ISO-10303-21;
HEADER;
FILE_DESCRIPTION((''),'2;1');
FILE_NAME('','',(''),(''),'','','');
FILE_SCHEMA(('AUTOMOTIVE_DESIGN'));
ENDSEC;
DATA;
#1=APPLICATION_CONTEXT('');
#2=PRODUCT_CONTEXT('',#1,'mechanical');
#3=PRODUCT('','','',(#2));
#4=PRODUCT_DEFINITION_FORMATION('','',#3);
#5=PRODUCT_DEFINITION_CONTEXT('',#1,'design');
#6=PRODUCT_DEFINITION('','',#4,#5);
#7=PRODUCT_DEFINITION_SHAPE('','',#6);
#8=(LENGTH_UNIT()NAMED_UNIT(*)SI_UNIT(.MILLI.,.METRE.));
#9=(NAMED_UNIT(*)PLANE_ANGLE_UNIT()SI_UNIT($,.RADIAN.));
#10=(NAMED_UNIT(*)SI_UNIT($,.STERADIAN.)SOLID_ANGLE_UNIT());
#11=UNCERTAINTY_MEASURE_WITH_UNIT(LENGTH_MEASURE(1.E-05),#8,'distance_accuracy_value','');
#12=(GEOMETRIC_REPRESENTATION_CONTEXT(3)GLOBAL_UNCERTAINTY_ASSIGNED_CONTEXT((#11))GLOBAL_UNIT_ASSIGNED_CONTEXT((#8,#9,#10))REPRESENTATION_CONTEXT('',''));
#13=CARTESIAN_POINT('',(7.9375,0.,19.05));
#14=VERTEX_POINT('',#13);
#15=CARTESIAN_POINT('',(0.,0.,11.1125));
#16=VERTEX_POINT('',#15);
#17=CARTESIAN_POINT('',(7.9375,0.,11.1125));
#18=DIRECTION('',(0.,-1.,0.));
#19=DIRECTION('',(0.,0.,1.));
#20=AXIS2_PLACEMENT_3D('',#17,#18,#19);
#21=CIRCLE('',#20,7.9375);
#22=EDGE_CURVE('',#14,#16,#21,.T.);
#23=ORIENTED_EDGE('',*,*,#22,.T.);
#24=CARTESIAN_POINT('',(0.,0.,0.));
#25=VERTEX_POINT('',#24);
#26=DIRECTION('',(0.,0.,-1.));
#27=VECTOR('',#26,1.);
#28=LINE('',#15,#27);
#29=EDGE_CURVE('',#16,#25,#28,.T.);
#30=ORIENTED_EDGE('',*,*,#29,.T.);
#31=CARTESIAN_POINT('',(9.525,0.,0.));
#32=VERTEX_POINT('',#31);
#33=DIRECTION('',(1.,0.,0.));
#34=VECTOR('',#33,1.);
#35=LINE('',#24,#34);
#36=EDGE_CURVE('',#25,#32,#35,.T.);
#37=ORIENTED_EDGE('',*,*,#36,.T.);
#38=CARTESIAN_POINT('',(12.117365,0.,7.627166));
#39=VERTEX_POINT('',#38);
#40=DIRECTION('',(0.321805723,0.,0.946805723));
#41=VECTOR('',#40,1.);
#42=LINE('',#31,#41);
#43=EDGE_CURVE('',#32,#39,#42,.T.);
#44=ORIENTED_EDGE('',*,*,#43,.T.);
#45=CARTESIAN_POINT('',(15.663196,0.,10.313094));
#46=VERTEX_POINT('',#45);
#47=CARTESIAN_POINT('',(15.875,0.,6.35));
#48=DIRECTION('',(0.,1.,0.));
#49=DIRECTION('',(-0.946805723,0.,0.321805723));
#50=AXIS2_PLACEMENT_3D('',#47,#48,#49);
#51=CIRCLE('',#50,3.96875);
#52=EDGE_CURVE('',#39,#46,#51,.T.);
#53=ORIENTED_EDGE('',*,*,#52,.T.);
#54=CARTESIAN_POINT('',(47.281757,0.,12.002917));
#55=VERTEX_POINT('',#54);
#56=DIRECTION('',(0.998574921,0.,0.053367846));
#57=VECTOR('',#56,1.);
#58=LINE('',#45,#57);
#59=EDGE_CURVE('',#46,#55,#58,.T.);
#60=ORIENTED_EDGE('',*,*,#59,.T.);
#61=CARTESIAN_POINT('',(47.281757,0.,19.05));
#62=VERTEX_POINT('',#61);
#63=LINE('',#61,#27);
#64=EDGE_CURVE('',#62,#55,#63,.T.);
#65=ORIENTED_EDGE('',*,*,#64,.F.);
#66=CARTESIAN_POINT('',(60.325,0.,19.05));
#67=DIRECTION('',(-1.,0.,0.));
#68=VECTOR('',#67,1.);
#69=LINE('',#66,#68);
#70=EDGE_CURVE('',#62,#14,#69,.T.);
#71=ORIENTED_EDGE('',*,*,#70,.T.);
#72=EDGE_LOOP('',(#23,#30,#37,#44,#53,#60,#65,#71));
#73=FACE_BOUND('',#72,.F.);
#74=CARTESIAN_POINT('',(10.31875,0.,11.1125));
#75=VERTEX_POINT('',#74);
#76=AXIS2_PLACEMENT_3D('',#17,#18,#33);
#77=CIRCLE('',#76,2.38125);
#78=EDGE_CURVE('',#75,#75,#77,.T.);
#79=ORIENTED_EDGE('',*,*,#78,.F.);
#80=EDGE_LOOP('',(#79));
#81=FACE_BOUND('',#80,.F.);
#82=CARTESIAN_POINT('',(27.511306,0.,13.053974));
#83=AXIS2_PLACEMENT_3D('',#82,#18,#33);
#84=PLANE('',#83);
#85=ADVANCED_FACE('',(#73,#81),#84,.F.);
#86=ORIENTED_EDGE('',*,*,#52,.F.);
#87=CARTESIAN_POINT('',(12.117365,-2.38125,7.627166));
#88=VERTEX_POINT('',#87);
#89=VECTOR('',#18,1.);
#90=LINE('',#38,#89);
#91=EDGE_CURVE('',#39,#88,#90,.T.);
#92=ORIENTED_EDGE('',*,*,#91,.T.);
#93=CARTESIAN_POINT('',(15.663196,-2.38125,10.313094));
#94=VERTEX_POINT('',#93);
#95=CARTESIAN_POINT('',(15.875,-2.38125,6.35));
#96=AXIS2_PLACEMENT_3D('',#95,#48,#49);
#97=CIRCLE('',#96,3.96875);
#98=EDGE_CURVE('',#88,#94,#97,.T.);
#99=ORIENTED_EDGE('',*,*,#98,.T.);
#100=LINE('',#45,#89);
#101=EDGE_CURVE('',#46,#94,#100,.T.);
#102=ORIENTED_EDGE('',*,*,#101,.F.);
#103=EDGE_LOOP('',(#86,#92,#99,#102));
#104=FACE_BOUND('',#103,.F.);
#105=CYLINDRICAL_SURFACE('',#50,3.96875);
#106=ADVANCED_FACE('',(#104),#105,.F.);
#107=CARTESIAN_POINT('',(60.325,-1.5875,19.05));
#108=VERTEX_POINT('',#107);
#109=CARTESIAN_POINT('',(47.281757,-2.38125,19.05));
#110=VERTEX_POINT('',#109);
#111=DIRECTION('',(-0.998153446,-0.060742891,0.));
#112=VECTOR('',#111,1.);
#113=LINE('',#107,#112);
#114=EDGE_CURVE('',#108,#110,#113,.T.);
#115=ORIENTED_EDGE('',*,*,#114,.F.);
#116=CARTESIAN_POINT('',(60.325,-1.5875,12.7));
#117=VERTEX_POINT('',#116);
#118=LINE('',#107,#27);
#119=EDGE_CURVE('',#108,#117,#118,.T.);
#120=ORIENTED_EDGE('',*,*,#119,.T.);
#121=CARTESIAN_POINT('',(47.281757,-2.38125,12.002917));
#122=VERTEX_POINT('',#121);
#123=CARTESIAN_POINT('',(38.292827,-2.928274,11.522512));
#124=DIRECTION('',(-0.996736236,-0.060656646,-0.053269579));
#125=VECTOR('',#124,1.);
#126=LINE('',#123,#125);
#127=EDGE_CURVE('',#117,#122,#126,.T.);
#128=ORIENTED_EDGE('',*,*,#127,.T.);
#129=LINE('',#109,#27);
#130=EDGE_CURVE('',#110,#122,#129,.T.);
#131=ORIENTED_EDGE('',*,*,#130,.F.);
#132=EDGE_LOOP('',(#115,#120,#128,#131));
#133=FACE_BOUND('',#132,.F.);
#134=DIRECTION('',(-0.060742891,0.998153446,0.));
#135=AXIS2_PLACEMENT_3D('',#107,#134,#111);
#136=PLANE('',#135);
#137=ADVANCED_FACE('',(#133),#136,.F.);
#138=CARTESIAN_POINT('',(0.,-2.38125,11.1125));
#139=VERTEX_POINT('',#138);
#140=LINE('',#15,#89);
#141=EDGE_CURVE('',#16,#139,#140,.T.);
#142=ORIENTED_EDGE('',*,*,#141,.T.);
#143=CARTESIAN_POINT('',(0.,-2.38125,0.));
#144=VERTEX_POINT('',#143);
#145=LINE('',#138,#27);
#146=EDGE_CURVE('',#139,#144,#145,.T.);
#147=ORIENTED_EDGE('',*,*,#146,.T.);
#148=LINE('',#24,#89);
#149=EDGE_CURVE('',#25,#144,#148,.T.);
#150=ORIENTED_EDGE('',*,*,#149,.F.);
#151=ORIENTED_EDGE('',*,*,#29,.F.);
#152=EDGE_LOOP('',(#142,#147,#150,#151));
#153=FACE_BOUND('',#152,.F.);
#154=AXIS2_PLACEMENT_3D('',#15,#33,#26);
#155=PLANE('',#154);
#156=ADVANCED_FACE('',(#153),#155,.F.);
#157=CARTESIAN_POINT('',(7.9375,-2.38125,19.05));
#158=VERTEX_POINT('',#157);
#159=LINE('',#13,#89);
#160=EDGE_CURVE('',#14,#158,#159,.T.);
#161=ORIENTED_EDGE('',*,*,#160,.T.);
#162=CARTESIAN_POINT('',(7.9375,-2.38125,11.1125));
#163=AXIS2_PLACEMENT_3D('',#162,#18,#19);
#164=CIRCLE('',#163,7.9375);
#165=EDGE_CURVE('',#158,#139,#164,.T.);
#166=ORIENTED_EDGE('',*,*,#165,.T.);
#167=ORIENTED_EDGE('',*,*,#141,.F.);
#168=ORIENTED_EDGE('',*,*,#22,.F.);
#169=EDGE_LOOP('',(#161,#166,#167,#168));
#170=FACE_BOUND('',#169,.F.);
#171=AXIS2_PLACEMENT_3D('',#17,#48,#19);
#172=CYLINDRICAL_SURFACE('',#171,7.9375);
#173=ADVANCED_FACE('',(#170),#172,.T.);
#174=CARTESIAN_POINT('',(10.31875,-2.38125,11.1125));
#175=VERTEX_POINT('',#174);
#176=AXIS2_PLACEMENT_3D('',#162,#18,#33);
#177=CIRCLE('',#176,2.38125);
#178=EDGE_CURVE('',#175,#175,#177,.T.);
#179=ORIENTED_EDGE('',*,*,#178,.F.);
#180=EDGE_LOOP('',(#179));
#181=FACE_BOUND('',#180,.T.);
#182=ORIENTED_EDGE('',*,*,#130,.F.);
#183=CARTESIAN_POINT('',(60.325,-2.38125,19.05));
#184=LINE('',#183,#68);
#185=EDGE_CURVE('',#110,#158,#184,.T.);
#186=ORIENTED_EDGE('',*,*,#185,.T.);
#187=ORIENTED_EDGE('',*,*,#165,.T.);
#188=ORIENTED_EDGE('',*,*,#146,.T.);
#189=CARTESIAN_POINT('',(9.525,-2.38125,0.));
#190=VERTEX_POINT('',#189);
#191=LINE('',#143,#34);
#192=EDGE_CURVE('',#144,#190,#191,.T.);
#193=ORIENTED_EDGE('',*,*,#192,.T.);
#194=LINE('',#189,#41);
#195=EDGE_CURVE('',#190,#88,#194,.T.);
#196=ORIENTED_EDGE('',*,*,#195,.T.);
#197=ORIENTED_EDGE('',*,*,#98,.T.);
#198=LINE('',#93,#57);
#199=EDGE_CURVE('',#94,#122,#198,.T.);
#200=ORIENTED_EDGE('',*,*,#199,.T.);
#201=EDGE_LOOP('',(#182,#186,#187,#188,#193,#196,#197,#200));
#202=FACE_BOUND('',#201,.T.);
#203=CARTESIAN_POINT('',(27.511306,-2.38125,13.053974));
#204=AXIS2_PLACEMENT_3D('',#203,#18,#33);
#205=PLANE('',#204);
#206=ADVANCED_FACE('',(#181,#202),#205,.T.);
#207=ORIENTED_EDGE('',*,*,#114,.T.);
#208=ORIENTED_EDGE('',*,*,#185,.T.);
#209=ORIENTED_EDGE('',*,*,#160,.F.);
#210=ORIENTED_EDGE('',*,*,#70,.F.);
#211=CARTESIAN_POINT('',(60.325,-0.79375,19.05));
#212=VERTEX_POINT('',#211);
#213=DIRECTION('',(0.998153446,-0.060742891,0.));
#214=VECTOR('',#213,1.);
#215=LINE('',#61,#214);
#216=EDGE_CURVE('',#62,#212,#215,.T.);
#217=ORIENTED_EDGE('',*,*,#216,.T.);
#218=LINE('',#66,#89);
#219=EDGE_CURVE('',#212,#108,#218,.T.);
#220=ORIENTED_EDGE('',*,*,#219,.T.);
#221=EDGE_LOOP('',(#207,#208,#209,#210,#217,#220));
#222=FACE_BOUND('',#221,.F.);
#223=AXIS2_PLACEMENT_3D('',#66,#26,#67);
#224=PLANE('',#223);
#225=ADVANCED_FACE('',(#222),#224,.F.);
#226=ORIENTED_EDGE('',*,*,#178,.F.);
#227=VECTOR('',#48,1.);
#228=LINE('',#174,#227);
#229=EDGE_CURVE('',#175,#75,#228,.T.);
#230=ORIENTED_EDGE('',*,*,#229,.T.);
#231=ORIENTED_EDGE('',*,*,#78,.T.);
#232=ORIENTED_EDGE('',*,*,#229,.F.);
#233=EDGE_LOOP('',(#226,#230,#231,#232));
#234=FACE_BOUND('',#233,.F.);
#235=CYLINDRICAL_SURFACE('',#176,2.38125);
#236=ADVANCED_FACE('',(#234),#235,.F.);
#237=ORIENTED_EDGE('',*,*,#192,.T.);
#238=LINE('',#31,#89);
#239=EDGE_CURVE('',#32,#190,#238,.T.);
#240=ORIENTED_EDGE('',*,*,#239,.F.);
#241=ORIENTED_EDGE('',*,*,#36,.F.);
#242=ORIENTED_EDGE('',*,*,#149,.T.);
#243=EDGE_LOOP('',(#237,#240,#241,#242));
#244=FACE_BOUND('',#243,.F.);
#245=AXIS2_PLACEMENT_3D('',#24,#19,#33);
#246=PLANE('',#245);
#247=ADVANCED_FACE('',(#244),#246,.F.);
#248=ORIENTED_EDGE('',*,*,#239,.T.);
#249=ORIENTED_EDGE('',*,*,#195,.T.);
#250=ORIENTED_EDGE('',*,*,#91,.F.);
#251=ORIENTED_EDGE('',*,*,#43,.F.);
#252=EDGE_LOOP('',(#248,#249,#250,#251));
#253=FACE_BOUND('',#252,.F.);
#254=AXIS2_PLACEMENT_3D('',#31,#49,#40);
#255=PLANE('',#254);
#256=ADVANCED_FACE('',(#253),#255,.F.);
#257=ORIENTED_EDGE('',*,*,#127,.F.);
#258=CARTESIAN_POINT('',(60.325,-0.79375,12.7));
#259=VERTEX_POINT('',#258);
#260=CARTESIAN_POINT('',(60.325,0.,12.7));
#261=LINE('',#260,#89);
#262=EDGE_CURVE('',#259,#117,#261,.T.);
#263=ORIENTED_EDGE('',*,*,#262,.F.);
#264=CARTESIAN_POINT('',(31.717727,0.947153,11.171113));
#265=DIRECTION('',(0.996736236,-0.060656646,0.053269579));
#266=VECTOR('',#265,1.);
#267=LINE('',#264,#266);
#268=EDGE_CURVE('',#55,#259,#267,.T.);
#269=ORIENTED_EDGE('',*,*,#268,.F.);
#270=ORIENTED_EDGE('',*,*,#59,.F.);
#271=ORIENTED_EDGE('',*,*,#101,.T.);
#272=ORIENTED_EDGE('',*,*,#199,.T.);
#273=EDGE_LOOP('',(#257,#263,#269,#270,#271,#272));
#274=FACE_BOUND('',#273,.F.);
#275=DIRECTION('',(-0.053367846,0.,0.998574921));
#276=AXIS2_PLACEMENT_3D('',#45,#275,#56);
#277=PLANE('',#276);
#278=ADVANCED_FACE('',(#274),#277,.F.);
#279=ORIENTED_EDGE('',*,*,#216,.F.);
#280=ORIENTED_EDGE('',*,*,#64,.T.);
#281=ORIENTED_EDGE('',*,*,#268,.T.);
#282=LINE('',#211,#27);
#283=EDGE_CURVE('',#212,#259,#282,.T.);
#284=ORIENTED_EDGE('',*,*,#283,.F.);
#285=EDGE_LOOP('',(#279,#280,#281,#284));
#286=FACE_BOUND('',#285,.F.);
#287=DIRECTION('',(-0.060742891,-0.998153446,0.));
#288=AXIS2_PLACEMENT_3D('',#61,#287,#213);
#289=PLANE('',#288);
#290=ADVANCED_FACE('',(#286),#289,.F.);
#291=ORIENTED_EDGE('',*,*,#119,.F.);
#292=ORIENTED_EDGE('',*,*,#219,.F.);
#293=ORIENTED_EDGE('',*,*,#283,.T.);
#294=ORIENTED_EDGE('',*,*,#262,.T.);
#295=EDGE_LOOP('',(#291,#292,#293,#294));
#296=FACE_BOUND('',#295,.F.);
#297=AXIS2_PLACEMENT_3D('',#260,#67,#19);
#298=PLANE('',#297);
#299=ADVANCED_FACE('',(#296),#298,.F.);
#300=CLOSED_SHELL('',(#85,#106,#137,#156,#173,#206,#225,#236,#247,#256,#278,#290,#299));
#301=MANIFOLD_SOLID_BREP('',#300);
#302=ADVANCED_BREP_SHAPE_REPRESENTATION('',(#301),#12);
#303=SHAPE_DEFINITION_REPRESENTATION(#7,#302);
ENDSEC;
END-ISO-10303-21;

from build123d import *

# Parameters (mm, degrees)
F1_DEPTH = 2.38125
F2_R     = 2.38125
F3_DEPTH = 2.38225
F5_DEPTH = 25.4


# Not quite as in the source:
# - a length typed as a fraction of an inch, garbled in the dataset ("3 / 203.2 mm" for 3/8 in), is restored


with BuildPart() as f1:
    # F0 (on Front) → F1 (new body)
    with BuildSketch(Plane.XZ):
        with BuildLine():
            Line((60.325, 19.05), (7.9375, 19.05))
            ThreePointArc((7.9375, 19.05), (2.3248399243, 16.7251600757), (0, 11.1125))
            Line((0, 11.1125), (0, 0))
            Line((0, 0), (9.525, 0))
            Line((9.525, 0), (12.1173647876, 7.6271664624))
            ThreePointArc((12.1173647876, 7.6271664624), (13.4786145605, 9.5135918491), (15.6631963617, 10.3130942181))
            Line((15.6631963617, 10.3130942181), (60.325, 12.7))
            Line((60.325, 12.7), (60.325, 19.05))
        make_face()
    extrude(amount=F1_DEPTH)

    # F2 (on face) → F3 (cut, through all)
    with BuildSketch(Plane.XZ.offset(2.38125)):
        with Locations((7.9375, 11.1125)):
            Circle(F2_R)
    extrude(amount=-F3_DEPTH, mode=Mode.SUBTRACT)

    # F4 (on face) → F5 (cut)
    with BuildSketch(Plane.XY.offset(19.05)):
        Polygon((60.325, 0), (47.2817567568, 0), (60.325, -0.79375), align=None)
        Polygon((60.325, -2.38125), (60.325, -1.5875), (47.2817567568, -2.38125), align=None)
    extrude(amount=-F5_DEPTH, mode=Mode.SUBTRACT)


solid = f1.part
